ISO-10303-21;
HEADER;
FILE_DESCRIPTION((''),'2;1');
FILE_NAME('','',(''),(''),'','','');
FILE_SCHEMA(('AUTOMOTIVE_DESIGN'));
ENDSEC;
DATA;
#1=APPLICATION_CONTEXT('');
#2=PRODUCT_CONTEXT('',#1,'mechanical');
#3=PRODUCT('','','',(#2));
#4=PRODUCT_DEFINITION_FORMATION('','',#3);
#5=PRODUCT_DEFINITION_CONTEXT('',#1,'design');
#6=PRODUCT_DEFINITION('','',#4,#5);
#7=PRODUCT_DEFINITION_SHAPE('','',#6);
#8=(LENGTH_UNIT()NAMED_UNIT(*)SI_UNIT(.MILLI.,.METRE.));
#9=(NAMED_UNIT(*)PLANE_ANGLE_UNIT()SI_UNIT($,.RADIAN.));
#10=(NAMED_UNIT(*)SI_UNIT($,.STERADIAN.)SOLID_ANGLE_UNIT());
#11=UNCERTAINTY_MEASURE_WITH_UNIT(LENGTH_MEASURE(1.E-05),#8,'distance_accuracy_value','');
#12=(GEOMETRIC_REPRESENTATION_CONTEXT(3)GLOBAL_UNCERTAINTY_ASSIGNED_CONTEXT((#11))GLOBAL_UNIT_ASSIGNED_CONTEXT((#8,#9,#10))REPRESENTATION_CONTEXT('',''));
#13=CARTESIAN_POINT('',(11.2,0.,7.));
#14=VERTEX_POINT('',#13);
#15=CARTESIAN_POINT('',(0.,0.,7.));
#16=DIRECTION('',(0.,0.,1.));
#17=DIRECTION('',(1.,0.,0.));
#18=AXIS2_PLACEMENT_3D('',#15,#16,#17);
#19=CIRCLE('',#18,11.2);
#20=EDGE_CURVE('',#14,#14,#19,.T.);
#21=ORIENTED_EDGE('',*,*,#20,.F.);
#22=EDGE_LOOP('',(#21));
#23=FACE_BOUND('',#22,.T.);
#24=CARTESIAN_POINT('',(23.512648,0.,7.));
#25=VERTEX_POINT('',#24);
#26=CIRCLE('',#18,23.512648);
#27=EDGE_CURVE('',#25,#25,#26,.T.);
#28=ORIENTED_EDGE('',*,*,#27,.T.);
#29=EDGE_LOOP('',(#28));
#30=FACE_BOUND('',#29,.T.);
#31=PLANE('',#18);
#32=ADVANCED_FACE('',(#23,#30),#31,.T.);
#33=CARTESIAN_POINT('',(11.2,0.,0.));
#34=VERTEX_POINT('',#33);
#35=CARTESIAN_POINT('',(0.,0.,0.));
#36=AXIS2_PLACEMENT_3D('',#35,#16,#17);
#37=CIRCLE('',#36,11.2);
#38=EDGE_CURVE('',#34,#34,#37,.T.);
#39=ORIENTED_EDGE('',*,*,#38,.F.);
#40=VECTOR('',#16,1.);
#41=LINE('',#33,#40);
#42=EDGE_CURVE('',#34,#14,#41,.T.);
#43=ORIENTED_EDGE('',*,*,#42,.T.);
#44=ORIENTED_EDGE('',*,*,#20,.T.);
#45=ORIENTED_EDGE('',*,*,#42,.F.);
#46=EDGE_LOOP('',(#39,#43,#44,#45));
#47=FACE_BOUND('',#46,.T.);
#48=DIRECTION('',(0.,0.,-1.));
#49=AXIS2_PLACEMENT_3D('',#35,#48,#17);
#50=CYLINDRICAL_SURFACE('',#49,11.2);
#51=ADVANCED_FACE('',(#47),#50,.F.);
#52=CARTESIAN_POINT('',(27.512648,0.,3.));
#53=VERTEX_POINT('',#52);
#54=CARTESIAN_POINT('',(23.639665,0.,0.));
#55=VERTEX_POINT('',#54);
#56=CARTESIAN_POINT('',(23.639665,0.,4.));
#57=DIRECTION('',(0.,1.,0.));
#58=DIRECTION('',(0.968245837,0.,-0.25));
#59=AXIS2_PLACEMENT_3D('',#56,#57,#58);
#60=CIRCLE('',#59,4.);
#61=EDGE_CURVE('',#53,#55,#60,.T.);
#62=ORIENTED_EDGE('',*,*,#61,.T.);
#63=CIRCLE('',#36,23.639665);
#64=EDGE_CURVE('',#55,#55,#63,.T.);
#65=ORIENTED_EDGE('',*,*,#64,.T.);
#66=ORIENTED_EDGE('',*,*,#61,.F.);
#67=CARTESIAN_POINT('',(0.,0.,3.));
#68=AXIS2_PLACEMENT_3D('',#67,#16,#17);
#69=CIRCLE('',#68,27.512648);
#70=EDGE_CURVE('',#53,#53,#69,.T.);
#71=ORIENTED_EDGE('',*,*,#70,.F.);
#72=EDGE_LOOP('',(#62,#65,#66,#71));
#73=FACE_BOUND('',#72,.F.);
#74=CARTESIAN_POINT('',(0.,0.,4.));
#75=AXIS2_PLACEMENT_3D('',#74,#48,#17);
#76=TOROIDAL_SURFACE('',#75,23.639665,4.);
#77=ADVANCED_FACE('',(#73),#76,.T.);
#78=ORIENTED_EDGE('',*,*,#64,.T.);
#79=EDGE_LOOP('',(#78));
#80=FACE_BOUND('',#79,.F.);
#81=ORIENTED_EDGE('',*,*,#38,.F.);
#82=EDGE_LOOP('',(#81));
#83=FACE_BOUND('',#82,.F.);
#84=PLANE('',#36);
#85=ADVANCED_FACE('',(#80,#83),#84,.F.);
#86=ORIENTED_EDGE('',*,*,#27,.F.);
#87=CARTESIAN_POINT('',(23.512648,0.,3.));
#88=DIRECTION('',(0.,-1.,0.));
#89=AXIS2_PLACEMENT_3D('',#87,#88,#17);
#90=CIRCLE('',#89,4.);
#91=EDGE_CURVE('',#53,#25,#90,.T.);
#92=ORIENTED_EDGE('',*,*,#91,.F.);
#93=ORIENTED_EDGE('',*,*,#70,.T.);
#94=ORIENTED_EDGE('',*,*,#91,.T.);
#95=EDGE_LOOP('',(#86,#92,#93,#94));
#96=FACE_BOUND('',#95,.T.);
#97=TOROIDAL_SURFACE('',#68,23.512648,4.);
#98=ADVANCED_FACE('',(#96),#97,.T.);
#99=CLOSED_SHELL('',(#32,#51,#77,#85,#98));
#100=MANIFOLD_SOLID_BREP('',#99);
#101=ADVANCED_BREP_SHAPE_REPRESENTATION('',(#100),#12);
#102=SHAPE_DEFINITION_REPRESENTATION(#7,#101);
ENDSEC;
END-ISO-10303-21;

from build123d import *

# Parameters (mm, degrees)
F0_R     = 27.5126478719
F0_R_2   = 11.2
F1_DEPTH = 7
F2_R     = 4


# Not quite as in the source:
# - a fillet or chamfer that OpenCascade refuses, or shapes differently, is made with other operations: its cross-section is extruded or revolved along the edge and cut away or added


with BuildPart() as f1:
    # F0 (on Top) → F1 (new body)
    with BuildSketch(Plane.XY):
        Circle(F0_R)
        Circle(F0_R_2, mode=Mode.SUBTRACT)
    extrude(amount=F1_DEPTH)

    # F2
    f2_edges = [f1.edges().sort_by_distance(p)[0] for p in [
        (-27.512648, 0, 7),
    ]]
    fillet(f2_edges, radius=F2_R)

    # F3: fillet of radius 4 on 1 edges, made by hand

    # F3_s1 → F3_t2 (revolve, cut)
    with BuildSketch(Plane.XZ):
        with BuildLine():
            ThreePointArc((27.5126478719, 3), (26.0891542684, 0.8377223398), (23.6396645256, 0))
            Line((23.6396645256, 0), (27.5126478719, 0))
            Line((27.5126478719, 0), (27.5126478719, 3))
        make_face()
    revolve(axis=Axis((0, 0, 0), (0, 0, 1)), mode=Mode.SUBTRACT)


solid = f1.part
